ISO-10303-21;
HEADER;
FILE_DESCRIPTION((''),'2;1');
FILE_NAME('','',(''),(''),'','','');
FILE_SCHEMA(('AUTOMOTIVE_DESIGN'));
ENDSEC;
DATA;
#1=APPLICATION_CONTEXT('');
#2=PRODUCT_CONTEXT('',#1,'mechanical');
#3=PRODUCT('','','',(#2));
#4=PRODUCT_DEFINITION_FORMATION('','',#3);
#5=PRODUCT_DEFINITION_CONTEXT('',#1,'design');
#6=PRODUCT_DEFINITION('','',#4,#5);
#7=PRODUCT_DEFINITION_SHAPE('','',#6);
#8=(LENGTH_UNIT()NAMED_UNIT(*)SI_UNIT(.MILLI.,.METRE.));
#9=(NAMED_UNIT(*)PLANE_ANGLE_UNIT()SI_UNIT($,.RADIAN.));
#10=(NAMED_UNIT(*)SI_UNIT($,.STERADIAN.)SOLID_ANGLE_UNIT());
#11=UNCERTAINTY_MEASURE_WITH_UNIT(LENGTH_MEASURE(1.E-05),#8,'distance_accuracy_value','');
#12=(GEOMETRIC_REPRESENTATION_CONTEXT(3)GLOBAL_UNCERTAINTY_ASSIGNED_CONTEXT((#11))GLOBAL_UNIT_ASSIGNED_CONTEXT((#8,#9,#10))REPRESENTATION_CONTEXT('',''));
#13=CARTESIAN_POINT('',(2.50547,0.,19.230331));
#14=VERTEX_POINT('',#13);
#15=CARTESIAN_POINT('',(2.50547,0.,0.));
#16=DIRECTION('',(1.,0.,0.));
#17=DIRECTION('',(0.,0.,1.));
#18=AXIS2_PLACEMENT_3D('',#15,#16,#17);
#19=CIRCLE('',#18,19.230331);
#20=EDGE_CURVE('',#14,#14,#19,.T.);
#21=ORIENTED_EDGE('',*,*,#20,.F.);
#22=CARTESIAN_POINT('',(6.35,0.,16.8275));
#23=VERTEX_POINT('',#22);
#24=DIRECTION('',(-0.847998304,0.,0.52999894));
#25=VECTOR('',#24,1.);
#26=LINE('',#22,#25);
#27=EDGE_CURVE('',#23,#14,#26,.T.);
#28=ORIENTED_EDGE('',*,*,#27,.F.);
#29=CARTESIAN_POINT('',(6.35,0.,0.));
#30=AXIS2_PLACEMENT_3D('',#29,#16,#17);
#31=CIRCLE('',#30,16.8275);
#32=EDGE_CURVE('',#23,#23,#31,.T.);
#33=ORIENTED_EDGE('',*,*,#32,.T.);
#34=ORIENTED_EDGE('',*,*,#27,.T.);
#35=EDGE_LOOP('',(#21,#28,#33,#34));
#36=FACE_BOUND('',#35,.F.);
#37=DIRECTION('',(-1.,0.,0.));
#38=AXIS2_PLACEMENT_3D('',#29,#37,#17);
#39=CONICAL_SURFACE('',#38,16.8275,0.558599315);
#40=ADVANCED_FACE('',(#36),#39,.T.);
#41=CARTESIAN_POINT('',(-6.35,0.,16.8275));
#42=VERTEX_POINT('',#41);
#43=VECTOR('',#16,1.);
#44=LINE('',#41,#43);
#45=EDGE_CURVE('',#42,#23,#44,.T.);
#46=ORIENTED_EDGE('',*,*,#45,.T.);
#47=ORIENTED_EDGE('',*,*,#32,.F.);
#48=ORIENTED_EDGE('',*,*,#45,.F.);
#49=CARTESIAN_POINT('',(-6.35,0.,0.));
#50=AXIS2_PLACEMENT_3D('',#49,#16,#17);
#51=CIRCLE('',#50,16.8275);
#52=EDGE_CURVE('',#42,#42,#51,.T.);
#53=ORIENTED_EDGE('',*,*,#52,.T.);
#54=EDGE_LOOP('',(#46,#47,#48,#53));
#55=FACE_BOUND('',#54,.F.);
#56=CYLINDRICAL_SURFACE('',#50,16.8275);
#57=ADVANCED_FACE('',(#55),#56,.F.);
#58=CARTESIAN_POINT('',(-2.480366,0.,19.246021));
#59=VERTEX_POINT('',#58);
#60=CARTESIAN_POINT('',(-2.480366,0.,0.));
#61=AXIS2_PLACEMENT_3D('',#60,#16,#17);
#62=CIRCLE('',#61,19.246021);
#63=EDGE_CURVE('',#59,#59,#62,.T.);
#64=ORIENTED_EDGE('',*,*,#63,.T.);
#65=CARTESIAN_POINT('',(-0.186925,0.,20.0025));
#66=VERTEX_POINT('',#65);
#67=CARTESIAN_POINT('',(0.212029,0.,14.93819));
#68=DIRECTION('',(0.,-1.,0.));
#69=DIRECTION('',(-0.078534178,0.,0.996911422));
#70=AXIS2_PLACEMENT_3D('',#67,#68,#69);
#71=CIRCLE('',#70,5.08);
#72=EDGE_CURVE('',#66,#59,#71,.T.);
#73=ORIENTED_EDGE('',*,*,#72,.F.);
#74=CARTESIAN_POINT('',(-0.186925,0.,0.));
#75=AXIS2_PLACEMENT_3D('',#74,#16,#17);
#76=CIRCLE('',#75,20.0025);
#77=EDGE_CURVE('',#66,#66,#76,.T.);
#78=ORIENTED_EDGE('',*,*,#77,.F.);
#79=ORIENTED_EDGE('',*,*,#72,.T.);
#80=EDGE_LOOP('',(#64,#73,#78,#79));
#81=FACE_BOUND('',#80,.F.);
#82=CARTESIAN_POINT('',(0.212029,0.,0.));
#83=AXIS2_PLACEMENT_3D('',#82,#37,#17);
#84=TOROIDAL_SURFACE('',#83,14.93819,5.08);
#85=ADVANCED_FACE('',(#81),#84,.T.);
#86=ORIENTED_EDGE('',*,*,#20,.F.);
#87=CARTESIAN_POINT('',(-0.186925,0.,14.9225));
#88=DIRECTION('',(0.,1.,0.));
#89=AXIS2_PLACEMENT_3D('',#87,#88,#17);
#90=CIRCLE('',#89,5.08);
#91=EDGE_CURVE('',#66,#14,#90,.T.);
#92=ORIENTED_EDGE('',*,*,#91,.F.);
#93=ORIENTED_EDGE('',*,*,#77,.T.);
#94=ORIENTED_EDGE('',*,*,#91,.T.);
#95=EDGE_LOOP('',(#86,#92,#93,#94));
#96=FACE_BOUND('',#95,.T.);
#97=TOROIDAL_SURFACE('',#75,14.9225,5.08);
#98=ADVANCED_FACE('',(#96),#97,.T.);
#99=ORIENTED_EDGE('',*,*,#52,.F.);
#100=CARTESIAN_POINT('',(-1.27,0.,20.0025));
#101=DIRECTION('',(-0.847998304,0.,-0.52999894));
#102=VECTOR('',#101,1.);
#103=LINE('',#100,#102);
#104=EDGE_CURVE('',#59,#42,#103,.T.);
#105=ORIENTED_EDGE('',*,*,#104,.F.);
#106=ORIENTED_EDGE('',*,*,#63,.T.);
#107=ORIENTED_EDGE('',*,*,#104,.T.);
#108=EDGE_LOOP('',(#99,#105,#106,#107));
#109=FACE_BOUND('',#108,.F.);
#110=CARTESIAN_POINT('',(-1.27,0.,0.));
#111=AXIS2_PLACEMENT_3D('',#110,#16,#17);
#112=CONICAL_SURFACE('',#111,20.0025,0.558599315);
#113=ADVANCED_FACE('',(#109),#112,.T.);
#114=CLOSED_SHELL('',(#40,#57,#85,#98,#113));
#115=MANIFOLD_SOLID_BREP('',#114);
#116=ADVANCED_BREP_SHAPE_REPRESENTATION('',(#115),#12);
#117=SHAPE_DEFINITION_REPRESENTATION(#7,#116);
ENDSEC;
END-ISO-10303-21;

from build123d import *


# Not quite as in the source:
# - a fillet or chamfer that OpenCascade refuses, or shapes differently, is made with other operations: its cross-section is extruded or revolved along the edge and cut away or added
# - a feature of the source that left no trace in its solid (it failed there, or was rolled back) is left out


with BuildPart() as f2:
    # F0 (on Front) → F2 (revolve)
    with BuildSketch(Plane.XZ):
        Polygon((1.27, 20.0025), (0, 20.0025), (-1.27, 20.0025), (-6.35, 16.8275), (6.35, 16.8275), align=None)
    revolve(axis=Axis((4.5157689601, 0, 0), (1, 0, 0)))

    # F4: fillet of radius 5.08 on 2 edges, made by hand

    # F4_s1 → F4_t2 (revolve, cut)
    with BuildSketch(Plane.XZ):
        with BuildLine():
            ThreePointArc((-0.1869248302, 20.0025), (1.2135423361, 19.8056436305), (2.505469785, 19.2303313843))
            Line((2.505469785, 19.2303313843), (1.27, 20.0025))
            Line((1.27, 20.0025), (-0.1869248302, 20.0025))
        make_face()
    revolve(axis=Axis((1.27, 0, 0), (1, 0, 0)), mode=Mode.SUBTRACT)

    # F4_s3 → F4_t4 (revolve, cut)
    with BuildSketch(Plane.XZ):
        with BuildLine():
            ThreePointArc((-0.1869248302, 20.0025), (-1.3792516549, 19.7625268782), (-2.4803658213, 19.2460213617))
            Line((-2.4803658213, 19.2460213617), (-1.27, 20.0025))
            Line((-1.27, 20.0025), (-0.1869248302, 20.0025))
        make_face()
    revolve(axis=Axis((-1.27, 0, 0), (1, 0, 0)), mode=Mode.SUBTRACT)


solid = f2.part
